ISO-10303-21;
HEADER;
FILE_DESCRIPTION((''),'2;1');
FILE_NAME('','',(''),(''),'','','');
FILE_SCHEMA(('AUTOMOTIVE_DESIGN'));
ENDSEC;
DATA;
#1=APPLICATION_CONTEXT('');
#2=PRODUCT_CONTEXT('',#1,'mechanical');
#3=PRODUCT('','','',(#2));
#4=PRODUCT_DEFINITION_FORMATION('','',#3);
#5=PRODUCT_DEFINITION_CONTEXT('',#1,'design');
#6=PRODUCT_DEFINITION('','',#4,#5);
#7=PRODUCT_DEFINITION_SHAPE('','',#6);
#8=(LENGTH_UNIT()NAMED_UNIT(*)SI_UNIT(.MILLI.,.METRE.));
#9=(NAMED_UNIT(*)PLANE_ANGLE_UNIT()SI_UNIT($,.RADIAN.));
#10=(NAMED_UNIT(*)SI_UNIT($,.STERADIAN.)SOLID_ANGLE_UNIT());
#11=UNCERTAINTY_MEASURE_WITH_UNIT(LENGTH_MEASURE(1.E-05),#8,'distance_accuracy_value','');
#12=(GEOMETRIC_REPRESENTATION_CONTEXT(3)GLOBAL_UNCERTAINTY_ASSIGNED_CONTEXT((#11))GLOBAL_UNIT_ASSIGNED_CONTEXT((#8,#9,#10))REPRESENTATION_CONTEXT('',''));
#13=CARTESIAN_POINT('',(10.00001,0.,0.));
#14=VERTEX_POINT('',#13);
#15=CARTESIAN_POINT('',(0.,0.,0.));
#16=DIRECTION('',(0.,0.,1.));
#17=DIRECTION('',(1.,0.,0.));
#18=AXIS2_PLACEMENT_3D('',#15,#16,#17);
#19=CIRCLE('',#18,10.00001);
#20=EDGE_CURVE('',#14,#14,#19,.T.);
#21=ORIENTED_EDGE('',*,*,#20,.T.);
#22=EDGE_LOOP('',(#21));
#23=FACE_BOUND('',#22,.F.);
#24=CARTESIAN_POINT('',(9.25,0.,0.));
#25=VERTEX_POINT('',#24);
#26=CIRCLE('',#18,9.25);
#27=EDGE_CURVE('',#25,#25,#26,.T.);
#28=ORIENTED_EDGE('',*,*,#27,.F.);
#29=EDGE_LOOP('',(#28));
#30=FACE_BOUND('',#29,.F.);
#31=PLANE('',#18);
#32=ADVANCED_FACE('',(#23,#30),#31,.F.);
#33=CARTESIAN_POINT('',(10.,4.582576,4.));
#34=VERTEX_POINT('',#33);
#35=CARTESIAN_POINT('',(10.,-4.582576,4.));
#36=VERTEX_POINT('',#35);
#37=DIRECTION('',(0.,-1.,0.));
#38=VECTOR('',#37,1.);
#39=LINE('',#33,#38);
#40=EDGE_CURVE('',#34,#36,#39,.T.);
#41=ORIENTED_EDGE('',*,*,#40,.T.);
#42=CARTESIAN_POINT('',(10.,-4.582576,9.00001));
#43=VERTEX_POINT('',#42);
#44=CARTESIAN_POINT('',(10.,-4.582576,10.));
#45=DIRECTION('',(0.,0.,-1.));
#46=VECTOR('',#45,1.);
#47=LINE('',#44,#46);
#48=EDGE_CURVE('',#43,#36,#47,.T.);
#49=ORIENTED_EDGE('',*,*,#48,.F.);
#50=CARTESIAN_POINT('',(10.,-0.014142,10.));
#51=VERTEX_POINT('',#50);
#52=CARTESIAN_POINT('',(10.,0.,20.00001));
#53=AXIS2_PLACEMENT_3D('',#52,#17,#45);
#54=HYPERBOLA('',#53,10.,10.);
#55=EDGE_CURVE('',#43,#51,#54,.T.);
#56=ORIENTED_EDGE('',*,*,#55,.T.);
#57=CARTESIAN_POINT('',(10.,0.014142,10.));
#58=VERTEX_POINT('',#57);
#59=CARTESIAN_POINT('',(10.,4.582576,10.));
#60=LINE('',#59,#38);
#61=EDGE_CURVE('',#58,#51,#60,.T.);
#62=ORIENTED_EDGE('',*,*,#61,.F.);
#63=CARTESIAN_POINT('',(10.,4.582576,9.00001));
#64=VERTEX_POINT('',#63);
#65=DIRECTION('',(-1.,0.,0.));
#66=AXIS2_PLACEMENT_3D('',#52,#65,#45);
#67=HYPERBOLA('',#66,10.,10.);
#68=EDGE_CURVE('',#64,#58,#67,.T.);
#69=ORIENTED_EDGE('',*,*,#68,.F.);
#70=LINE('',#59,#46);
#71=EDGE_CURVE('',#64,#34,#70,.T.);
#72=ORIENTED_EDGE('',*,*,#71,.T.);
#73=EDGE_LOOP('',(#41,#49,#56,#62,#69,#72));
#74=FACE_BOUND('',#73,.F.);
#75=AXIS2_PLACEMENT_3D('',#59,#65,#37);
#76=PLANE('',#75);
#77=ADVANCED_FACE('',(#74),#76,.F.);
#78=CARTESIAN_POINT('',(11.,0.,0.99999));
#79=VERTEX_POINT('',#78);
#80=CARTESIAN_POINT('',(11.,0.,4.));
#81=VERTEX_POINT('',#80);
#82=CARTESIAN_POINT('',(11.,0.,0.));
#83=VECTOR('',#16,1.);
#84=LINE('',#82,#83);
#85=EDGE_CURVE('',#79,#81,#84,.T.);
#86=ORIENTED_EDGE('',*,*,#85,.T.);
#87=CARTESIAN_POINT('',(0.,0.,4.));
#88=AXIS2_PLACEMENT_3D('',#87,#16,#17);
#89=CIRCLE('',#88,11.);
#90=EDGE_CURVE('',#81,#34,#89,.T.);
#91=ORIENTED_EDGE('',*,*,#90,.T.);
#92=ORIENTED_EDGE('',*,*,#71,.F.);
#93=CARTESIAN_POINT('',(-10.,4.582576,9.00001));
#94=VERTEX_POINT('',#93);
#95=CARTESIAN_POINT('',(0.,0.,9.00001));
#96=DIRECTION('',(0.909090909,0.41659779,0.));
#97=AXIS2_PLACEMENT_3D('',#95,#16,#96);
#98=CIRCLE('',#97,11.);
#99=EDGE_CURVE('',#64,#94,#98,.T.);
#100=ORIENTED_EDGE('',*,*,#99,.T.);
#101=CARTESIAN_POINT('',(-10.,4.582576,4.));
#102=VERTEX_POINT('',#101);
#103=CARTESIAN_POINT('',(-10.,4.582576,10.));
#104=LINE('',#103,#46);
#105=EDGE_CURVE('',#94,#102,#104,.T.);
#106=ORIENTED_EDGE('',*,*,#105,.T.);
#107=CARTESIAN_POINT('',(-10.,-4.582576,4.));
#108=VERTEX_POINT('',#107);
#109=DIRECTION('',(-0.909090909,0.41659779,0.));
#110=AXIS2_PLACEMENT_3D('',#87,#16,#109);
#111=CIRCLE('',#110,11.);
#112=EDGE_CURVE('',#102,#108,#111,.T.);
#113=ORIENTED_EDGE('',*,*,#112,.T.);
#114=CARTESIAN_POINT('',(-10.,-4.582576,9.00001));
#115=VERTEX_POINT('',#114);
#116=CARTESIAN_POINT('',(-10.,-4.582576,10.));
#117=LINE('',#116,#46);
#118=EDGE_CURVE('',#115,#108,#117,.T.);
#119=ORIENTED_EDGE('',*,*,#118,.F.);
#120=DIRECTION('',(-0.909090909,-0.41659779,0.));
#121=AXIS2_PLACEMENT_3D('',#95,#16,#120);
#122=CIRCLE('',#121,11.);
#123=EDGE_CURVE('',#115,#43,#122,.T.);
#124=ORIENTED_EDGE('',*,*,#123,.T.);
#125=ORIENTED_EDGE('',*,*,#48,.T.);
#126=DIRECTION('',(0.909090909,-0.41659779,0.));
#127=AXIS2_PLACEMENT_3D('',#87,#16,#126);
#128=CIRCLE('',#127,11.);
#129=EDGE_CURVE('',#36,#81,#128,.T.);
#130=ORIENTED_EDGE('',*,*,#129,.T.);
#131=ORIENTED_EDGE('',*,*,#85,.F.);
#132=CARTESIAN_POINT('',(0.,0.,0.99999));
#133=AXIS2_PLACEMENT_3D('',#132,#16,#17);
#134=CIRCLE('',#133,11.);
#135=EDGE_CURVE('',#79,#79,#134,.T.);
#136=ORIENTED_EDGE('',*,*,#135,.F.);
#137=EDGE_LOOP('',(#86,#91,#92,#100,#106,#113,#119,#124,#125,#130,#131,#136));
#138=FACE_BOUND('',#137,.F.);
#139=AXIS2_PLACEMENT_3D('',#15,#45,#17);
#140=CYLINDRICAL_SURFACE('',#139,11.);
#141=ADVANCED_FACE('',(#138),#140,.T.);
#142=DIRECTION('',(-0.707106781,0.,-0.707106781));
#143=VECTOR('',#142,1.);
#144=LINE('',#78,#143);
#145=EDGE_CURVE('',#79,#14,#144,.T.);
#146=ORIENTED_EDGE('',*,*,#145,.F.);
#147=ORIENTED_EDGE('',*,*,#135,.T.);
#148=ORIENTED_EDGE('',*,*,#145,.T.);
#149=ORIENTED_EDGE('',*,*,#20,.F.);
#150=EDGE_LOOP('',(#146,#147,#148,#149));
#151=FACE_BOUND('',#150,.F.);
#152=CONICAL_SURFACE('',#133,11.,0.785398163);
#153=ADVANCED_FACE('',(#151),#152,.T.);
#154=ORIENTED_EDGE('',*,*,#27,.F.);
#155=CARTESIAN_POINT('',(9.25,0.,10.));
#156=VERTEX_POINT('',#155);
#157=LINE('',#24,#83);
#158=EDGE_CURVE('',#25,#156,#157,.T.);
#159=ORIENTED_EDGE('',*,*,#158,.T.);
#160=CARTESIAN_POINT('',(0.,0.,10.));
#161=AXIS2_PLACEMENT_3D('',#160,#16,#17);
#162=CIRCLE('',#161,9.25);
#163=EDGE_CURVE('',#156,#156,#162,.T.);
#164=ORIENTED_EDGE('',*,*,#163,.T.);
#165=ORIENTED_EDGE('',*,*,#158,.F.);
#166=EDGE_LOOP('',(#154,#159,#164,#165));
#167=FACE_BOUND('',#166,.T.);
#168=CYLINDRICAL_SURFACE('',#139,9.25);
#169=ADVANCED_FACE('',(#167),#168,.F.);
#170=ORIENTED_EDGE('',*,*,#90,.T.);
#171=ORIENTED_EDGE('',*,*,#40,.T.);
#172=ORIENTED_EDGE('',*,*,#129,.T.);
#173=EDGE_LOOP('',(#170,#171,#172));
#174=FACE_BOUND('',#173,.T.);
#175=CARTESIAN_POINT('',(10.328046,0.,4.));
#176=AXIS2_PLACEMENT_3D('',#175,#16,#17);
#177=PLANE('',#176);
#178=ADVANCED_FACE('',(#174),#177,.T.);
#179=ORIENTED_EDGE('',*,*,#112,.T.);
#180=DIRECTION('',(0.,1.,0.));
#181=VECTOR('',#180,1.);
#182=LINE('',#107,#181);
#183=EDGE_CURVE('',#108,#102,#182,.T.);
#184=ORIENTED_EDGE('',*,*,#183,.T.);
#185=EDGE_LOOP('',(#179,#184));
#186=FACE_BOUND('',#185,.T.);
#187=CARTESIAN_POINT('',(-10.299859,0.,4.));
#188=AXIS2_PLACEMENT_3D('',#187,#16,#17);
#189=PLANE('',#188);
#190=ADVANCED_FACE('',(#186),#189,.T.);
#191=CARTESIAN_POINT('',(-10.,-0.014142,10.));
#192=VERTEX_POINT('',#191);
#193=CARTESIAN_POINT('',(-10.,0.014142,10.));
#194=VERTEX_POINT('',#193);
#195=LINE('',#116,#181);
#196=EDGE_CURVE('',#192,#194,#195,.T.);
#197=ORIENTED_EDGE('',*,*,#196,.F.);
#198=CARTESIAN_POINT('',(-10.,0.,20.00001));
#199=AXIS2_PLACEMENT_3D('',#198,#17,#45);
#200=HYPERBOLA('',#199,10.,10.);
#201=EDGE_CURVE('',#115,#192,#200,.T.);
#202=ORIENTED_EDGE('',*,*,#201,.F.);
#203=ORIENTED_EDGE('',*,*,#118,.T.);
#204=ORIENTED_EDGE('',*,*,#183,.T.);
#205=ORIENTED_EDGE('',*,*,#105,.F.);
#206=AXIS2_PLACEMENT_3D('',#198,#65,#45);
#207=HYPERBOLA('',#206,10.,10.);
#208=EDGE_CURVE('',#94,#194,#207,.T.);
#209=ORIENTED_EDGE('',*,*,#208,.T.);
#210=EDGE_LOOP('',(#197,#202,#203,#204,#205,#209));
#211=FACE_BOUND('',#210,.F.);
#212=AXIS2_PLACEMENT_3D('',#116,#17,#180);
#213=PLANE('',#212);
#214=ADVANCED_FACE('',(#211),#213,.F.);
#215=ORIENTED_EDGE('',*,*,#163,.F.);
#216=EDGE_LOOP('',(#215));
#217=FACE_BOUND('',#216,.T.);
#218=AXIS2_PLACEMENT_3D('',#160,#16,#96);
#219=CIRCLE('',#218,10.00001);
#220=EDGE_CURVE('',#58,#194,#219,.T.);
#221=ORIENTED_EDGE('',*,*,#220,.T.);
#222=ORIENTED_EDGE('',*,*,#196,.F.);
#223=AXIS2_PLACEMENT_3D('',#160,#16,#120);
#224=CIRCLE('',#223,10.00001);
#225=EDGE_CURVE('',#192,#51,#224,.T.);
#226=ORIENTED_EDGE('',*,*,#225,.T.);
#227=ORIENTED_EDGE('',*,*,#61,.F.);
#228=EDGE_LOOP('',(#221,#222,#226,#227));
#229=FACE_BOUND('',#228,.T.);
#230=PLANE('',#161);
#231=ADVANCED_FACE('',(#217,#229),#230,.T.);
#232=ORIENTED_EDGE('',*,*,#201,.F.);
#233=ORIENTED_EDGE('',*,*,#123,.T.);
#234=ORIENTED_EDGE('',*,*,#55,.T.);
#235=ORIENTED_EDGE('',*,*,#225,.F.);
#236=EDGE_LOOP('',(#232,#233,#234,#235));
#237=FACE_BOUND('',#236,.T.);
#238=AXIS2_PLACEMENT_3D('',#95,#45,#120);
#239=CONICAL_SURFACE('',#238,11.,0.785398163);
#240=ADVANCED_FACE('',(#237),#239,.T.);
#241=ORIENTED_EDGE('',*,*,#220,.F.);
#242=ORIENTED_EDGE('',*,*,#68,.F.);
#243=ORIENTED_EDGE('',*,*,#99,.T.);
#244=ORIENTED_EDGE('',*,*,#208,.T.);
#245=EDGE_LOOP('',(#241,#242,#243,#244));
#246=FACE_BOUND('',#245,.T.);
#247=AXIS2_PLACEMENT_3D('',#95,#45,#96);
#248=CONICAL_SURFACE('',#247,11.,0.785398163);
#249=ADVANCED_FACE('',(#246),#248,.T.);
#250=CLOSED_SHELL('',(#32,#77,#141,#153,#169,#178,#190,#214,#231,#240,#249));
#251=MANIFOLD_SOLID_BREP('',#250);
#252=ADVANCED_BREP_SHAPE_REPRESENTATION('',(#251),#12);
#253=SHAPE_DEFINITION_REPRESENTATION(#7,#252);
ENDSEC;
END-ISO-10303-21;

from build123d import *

# Parameters (mm, degrees)
F0_R     = 11
F0_R_2   = 9.25
F1_DEPTH = 10
F3_DEPTH = 6
F4_SIZE  = 0.99999


# Not quite as in the source:
# - a fillet or chamfer is up to 0.001 mm smaller than in the source, because OpenCascade refuses the exact size


with BuildPart() as f1:
    # F0 (on Top) → F1 (new body)
    with BuildSketch(Plane.XY):
        Circle(F0_R)
        Circle(F0_R_2, mode=Mode.SUBTRACT)
    extrude(amount=F1_DEPTH)

    # F2 (on face) → F3 (cut)
    with BuildSketch(Plane.XY.offset(10)):
        with BuildLine():
            Line((-10, -4.582575695), (-10, 4.582575695))
            ThreePointArc((-10, 4.582575695), (-11, 0), (-10, -4.582575695))
        make_face()
        with BuildLine():
            ThreePointArc((11, 0), (10.7470926301, 2.3452078799), (10, 4.582575695))
            Line((10, 4.582575695), (10, -4.582575695))
            ThreePointArc((10, -4.582575695), (10.7470926301, -2.3452078799), (11, 0))
        make_face()
    extrude(amount=-F3_DEPTH, mode=Mode.SUBTRACT)

    # F4 (size 1 in the source; OpenCascade refuses exactly that, so slightly less here)
    f4_edges = [f1.edges().sort_by_distance(p)[0] for p in [
        (-11, 0, 0),
        (0, -11, 10),
        (0, 11, 10),
    ]]
    chamfer(f4_edges, length=F4_SIZE)


solid = f1.part
